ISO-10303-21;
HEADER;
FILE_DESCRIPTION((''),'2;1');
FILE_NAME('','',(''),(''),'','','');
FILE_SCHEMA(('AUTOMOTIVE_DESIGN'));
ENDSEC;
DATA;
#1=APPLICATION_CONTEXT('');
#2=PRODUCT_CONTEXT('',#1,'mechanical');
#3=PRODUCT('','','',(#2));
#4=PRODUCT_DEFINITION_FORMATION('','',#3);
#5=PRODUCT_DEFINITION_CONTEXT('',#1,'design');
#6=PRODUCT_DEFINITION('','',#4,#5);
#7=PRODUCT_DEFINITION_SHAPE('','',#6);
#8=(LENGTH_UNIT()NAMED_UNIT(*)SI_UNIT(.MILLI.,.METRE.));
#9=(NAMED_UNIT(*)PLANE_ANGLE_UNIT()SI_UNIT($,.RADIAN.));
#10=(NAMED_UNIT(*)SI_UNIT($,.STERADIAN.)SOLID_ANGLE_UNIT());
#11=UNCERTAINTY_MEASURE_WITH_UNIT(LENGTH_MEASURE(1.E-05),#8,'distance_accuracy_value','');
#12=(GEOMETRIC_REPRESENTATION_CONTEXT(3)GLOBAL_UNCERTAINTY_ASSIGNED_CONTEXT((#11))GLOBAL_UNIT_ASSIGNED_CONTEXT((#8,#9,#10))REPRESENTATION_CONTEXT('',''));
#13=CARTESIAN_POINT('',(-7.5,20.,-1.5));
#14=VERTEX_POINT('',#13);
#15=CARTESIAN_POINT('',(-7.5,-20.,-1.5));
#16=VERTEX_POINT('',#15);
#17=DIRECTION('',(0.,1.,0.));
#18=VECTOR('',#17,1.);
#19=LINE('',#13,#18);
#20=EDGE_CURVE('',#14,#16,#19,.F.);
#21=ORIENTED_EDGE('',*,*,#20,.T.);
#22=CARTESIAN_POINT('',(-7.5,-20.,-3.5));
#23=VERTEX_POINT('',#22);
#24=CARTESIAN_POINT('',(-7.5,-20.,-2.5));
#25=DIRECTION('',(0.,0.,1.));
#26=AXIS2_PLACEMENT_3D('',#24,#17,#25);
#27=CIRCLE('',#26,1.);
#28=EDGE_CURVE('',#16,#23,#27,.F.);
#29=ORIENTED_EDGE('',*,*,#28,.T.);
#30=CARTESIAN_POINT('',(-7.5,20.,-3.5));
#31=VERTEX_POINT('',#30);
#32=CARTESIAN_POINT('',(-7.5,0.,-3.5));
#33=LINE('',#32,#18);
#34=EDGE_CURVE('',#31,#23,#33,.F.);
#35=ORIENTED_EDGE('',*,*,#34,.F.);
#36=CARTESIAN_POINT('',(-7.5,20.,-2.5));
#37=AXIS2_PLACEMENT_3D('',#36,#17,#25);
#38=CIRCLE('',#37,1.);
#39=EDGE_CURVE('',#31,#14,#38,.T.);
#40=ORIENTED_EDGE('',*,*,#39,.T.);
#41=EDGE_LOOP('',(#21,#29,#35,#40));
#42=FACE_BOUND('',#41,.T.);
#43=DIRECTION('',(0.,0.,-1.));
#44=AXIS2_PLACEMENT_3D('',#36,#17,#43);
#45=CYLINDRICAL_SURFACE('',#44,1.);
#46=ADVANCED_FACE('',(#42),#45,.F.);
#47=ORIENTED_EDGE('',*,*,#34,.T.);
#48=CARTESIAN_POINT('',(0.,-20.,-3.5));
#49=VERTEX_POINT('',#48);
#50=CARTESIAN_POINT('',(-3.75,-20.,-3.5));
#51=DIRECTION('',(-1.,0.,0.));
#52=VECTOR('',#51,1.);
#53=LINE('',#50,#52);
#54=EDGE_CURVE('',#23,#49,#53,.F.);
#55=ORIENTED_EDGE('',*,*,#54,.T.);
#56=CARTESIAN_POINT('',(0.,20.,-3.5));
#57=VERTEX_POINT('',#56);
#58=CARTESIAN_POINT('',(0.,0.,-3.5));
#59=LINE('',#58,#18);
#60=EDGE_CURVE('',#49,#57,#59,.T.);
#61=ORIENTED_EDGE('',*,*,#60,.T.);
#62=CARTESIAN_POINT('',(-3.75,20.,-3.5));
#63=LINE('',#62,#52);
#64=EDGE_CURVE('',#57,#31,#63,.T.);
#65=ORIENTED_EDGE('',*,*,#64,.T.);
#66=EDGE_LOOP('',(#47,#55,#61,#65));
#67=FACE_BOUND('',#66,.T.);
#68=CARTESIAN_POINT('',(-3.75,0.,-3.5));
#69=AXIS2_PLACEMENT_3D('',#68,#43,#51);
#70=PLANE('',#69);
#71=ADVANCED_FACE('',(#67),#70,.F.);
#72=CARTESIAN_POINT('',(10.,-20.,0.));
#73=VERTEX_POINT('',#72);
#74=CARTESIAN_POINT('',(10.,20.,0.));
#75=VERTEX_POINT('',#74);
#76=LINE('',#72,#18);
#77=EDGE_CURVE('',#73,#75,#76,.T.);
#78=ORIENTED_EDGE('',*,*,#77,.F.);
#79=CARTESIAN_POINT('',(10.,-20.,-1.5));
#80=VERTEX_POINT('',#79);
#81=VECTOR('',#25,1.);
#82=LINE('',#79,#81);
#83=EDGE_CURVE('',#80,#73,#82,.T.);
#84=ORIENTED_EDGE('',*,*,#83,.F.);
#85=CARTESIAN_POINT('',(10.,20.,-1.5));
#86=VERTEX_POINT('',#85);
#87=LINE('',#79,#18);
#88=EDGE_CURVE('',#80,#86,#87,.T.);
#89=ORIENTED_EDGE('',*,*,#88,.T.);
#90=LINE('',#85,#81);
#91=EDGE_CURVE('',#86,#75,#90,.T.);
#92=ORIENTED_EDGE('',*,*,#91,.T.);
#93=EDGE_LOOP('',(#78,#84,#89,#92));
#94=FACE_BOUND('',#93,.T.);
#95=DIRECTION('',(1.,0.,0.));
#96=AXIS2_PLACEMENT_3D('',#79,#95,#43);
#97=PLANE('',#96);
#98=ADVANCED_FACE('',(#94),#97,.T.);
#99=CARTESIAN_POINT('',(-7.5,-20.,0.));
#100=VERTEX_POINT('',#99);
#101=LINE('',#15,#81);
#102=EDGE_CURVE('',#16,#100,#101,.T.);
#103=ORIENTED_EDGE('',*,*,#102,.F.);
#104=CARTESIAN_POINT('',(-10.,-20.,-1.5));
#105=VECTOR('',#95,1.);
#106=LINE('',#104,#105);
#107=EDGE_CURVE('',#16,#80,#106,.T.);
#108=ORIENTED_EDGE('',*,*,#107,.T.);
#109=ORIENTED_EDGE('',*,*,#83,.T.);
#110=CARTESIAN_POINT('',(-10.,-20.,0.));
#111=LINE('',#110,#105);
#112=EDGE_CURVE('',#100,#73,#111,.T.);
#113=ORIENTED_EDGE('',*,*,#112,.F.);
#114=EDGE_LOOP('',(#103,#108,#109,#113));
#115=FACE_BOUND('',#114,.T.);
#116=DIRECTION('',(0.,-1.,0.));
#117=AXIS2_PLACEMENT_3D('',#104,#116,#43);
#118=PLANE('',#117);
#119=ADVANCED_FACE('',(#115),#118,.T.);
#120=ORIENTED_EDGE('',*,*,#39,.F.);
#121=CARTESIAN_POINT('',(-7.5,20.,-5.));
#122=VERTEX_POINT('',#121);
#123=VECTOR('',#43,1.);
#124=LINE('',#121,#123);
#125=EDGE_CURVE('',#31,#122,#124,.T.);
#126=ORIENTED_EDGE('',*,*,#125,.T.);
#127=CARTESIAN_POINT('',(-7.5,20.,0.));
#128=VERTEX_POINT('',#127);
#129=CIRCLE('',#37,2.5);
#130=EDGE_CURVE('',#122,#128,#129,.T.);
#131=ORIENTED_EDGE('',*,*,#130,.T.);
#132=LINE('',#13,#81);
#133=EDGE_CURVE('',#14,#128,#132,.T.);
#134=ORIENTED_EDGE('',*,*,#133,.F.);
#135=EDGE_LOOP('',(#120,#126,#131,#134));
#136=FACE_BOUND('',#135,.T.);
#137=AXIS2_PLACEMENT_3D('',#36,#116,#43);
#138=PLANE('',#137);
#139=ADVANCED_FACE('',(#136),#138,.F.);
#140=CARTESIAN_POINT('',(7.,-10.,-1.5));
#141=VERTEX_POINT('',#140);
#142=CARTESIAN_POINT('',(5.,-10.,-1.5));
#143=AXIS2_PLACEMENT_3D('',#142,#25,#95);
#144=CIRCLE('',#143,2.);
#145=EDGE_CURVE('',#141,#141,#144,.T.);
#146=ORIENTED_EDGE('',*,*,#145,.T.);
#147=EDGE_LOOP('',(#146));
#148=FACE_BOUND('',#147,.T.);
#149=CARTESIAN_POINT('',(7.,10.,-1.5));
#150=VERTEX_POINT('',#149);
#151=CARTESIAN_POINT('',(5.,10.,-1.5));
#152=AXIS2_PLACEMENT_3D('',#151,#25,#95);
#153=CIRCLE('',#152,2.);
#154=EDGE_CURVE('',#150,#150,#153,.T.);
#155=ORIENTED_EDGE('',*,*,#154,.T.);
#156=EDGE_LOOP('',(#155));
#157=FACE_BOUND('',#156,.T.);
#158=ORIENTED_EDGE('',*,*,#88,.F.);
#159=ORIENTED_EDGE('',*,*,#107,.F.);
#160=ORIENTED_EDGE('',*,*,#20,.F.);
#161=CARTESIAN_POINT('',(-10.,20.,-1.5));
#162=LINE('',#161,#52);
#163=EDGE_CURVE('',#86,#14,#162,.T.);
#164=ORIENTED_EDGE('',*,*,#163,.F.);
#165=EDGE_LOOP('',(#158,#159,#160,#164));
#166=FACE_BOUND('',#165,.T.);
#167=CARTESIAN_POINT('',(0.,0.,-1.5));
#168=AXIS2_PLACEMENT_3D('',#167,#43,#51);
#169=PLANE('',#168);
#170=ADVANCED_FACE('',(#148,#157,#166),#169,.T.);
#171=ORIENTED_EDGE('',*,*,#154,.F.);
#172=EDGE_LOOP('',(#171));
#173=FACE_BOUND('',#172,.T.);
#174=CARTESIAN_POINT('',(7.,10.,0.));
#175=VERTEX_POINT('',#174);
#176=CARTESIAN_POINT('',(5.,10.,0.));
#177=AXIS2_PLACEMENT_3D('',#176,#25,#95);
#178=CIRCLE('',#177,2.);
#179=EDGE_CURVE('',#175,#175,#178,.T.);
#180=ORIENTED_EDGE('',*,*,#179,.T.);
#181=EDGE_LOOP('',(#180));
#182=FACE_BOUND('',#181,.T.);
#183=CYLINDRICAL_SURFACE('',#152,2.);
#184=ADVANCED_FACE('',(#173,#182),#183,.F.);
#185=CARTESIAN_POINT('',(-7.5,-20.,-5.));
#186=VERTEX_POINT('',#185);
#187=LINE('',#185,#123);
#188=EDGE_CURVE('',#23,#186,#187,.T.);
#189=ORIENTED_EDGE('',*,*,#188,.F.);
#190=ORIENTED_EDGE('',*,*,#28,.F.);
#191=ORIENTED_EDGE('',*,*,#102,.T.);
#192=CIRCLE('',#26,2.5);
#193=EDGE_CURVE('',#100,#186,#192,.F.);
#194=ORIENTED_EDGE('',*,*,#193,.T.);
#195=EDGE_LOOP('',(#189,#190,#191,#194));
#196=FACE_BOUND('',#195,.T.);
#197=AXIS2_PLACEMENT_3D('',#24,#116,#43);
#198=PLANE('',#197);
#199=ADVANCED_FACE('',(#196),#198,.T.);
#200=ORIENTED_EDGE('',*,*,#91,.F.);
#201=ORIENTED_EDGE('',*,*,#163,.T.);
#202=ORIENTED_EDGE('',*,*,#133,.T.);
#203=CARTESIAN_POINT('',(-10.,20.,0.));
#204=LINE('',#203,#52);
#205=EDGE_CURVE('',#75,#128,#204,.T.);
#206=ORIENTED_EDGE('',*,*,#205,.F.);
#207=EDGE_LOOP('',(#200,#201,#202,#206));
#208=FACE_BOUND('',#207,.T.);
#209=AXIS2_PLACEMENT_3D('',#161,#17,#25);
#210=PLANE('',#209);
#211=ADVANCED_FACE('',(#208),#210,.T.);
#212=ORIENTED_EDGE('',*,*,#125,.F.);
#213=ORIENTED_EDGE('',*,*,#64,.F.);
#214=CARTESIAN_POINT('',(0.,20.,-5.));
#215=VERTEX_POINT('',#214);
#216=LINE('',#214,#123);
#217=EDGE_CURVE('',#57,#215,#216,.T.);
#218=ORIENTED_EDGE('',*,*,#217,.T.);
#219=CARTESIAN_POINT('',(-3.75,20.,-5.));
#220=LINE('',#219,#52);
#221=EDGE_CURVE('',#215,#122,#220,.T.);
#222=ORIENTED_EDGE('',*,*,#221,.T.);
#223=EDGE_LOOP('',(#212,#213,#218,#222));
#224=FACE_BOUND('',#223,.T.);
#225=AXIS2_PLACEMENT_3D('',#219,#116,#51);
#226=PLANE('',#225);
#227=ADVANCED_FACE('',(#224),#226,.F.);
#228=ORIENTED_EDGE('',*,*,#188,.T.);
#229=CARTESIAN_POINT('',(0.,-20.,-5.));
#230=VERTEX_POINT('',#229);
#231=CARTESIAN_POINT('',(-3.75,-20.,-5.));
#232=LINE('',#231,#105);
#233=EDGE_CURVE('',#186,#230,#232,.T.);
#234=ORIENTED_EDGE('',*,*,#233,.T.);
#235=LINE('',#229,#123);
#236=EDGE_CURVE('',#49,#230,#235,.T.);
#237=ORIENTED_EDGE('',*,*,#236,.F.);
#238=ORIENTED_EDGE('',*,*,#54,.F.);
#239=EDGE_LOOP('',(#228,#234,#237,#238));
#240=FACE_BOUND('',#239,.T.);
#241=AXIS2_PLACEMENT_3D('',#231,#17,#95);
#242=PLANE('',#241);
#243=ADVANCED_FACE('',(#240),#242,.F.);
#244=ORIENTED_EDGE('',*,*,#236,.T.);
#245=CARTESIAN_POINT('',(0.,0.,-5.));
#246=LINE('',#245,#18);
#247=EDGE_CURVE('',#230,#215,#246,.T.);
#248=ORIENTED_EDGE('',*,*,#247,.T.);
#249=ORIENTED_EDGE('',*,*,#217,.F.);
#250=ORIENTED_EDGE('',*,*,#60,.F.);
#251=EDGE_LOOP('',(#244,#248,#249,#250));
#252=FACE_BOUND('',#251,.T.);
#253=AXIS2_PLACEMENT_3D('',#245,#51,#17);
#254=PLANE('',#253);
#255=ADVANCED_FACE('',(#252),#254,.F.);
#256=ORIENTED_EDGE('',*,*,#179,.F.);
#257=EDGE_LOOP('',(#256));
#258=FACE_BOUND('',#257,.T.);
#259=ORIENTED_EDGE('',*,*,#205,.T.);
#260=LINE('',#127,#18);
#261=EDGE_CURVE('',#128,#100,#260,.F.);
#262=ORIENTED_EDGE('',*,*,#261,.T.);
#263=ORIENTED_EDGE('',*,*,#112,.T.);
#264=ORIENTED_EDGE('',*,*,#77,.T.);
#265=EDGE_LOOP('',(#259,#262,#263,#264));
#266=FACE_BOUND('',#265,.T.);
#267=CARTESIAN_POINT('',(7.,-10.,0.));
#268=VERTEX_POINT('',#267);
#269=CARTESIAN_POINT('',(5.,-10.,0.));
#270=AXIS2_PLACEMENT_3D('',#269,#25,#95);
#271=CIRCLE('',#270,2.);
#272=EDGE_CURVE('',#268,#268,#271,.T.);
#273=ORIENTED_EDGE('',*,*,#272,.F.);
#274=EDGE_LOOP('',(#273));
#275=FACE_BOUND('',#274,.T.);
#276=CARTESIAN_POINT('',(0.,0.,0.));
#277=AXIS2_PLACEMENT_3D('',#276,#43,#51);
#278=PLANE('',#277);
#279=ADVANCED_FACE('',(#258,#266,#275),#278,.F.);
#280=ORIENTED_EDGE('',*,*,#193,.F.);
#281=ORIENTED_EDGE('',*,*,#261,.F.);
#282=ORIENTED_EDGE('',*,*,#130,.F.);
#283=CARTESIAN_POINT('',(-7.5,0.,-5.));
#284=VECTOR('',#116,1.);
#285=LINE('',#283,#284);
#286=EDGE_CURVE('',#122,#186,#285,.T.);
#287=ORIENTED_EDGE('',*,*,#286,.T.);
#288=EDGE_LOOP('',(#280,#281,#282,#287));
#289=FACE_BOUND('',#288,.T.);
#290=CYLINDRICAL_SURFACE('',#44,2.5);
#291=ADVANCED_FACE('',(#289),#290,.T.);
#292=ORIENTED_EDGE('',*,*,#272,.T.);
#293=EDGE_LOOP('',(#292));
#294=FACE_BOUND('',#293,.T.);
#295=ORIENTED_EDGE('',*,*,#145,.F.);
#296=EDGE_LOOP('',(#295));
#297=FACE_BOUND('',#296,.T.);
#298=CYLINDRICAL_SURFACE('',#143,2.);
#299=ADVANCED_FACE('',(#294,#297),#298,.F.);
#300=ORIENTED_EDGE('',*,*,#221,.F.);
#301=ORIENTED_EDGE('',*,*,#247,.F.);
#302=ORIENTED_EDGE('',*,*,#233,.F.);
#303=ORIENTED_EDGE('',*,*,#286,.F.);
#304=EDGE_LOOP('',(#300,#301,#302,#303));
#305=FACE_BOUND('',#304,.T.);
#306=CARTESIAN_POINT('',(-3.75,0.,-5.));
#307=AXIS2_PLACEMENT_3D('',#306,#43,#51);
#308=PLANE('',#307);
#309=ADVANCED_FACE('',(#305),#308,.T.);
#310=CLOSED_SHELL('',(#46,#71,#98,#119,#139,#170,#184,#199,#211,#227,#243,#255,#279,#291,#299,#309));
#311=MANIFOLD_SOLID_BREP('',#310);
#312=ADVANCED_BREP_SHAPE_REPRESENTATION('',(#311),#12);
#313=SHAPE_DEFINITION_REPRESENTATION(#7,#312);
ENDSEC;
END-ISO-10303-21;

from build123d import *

# Parameters (mm, degrees)
SKETCH_1_W             = 20
SKETCH_1_H             = 40
SKETCH_1_R             = 2
SM_BASE_FLANGE_1_DEPTH = 1.5
OTHER_START            = -20
OTHER_1_DEPTH          = 40
OTHER_1_2_DEPTH        = 40


# Read off the part's stored shape, not the designer's step: 褶边1
# Sheet-metal steps are written as plain solids
with BuildPart() as part:
    # Sketch 1 → 基体-法兰1 (new body)
    with BuildSketch(Plane.XY):
        Rectangle(SKETCH_1_W, SKETCH_1_H)
        with Locations((5, 10)):
            Circle(SKETCH_1_R, mode=Mode.SUBTRACT)
        with Locations((5, -10)):
            Circle(SKETCH_1_R, mode=Mode.SUBTRACT)
    extrude(amount=-SM_BASE_FLANGE_1_DEPTH)

    # Other 1 outline → Other 1 (cut)
    with BuildSketch(Plane(origin=(0, 0, 0), x_dir=(1, 0, 0), z_dir=(0, 1, 0)).offset(OTHER_START)):
        with BuildLine():
            ThreePointArc((-7.5, 0), (-8.869306394, 0.408349934), (-9.791287847, 1.5))
            Line((-9.791287847, 1.5), (-10, 1.5))
            Line((-10, 1.5), (-10, 0))
            Line((-10, 0), (-7.5, 0))
        make_face()
    extrude(amount=OTHER_1_DEPTH, mode=Mode.SUBTRACT)

    # Other 1 2 outline → Other 1 2 (add)
    with BuildSketch(Plane(origin=(0, 0, 0), x_dir=(1, 0, 0), z_dir=(0, 1, 0)).offset(OTHER_START)):
        with BuildLine():
            Line((0, 3.5), (0, 5))
            Line((0, 5), (-7.5, 5))
            ThreePointArc((-7.5, 5), (-9.591650066, 3.869306394), (-9.791287847, 1.5))
            Line((-9.791287847, 1.5), (-7.5, 1.5))
            ThreePointArc((-7.5, 1.5), (-8.5, 2.5), (-7.5, 3.5))
            Line((-7.5, 3.5), (0, 3.5))
        make_face()
    extrude(amount=OTHER_1_2_DEPTH)


solid = part.part
